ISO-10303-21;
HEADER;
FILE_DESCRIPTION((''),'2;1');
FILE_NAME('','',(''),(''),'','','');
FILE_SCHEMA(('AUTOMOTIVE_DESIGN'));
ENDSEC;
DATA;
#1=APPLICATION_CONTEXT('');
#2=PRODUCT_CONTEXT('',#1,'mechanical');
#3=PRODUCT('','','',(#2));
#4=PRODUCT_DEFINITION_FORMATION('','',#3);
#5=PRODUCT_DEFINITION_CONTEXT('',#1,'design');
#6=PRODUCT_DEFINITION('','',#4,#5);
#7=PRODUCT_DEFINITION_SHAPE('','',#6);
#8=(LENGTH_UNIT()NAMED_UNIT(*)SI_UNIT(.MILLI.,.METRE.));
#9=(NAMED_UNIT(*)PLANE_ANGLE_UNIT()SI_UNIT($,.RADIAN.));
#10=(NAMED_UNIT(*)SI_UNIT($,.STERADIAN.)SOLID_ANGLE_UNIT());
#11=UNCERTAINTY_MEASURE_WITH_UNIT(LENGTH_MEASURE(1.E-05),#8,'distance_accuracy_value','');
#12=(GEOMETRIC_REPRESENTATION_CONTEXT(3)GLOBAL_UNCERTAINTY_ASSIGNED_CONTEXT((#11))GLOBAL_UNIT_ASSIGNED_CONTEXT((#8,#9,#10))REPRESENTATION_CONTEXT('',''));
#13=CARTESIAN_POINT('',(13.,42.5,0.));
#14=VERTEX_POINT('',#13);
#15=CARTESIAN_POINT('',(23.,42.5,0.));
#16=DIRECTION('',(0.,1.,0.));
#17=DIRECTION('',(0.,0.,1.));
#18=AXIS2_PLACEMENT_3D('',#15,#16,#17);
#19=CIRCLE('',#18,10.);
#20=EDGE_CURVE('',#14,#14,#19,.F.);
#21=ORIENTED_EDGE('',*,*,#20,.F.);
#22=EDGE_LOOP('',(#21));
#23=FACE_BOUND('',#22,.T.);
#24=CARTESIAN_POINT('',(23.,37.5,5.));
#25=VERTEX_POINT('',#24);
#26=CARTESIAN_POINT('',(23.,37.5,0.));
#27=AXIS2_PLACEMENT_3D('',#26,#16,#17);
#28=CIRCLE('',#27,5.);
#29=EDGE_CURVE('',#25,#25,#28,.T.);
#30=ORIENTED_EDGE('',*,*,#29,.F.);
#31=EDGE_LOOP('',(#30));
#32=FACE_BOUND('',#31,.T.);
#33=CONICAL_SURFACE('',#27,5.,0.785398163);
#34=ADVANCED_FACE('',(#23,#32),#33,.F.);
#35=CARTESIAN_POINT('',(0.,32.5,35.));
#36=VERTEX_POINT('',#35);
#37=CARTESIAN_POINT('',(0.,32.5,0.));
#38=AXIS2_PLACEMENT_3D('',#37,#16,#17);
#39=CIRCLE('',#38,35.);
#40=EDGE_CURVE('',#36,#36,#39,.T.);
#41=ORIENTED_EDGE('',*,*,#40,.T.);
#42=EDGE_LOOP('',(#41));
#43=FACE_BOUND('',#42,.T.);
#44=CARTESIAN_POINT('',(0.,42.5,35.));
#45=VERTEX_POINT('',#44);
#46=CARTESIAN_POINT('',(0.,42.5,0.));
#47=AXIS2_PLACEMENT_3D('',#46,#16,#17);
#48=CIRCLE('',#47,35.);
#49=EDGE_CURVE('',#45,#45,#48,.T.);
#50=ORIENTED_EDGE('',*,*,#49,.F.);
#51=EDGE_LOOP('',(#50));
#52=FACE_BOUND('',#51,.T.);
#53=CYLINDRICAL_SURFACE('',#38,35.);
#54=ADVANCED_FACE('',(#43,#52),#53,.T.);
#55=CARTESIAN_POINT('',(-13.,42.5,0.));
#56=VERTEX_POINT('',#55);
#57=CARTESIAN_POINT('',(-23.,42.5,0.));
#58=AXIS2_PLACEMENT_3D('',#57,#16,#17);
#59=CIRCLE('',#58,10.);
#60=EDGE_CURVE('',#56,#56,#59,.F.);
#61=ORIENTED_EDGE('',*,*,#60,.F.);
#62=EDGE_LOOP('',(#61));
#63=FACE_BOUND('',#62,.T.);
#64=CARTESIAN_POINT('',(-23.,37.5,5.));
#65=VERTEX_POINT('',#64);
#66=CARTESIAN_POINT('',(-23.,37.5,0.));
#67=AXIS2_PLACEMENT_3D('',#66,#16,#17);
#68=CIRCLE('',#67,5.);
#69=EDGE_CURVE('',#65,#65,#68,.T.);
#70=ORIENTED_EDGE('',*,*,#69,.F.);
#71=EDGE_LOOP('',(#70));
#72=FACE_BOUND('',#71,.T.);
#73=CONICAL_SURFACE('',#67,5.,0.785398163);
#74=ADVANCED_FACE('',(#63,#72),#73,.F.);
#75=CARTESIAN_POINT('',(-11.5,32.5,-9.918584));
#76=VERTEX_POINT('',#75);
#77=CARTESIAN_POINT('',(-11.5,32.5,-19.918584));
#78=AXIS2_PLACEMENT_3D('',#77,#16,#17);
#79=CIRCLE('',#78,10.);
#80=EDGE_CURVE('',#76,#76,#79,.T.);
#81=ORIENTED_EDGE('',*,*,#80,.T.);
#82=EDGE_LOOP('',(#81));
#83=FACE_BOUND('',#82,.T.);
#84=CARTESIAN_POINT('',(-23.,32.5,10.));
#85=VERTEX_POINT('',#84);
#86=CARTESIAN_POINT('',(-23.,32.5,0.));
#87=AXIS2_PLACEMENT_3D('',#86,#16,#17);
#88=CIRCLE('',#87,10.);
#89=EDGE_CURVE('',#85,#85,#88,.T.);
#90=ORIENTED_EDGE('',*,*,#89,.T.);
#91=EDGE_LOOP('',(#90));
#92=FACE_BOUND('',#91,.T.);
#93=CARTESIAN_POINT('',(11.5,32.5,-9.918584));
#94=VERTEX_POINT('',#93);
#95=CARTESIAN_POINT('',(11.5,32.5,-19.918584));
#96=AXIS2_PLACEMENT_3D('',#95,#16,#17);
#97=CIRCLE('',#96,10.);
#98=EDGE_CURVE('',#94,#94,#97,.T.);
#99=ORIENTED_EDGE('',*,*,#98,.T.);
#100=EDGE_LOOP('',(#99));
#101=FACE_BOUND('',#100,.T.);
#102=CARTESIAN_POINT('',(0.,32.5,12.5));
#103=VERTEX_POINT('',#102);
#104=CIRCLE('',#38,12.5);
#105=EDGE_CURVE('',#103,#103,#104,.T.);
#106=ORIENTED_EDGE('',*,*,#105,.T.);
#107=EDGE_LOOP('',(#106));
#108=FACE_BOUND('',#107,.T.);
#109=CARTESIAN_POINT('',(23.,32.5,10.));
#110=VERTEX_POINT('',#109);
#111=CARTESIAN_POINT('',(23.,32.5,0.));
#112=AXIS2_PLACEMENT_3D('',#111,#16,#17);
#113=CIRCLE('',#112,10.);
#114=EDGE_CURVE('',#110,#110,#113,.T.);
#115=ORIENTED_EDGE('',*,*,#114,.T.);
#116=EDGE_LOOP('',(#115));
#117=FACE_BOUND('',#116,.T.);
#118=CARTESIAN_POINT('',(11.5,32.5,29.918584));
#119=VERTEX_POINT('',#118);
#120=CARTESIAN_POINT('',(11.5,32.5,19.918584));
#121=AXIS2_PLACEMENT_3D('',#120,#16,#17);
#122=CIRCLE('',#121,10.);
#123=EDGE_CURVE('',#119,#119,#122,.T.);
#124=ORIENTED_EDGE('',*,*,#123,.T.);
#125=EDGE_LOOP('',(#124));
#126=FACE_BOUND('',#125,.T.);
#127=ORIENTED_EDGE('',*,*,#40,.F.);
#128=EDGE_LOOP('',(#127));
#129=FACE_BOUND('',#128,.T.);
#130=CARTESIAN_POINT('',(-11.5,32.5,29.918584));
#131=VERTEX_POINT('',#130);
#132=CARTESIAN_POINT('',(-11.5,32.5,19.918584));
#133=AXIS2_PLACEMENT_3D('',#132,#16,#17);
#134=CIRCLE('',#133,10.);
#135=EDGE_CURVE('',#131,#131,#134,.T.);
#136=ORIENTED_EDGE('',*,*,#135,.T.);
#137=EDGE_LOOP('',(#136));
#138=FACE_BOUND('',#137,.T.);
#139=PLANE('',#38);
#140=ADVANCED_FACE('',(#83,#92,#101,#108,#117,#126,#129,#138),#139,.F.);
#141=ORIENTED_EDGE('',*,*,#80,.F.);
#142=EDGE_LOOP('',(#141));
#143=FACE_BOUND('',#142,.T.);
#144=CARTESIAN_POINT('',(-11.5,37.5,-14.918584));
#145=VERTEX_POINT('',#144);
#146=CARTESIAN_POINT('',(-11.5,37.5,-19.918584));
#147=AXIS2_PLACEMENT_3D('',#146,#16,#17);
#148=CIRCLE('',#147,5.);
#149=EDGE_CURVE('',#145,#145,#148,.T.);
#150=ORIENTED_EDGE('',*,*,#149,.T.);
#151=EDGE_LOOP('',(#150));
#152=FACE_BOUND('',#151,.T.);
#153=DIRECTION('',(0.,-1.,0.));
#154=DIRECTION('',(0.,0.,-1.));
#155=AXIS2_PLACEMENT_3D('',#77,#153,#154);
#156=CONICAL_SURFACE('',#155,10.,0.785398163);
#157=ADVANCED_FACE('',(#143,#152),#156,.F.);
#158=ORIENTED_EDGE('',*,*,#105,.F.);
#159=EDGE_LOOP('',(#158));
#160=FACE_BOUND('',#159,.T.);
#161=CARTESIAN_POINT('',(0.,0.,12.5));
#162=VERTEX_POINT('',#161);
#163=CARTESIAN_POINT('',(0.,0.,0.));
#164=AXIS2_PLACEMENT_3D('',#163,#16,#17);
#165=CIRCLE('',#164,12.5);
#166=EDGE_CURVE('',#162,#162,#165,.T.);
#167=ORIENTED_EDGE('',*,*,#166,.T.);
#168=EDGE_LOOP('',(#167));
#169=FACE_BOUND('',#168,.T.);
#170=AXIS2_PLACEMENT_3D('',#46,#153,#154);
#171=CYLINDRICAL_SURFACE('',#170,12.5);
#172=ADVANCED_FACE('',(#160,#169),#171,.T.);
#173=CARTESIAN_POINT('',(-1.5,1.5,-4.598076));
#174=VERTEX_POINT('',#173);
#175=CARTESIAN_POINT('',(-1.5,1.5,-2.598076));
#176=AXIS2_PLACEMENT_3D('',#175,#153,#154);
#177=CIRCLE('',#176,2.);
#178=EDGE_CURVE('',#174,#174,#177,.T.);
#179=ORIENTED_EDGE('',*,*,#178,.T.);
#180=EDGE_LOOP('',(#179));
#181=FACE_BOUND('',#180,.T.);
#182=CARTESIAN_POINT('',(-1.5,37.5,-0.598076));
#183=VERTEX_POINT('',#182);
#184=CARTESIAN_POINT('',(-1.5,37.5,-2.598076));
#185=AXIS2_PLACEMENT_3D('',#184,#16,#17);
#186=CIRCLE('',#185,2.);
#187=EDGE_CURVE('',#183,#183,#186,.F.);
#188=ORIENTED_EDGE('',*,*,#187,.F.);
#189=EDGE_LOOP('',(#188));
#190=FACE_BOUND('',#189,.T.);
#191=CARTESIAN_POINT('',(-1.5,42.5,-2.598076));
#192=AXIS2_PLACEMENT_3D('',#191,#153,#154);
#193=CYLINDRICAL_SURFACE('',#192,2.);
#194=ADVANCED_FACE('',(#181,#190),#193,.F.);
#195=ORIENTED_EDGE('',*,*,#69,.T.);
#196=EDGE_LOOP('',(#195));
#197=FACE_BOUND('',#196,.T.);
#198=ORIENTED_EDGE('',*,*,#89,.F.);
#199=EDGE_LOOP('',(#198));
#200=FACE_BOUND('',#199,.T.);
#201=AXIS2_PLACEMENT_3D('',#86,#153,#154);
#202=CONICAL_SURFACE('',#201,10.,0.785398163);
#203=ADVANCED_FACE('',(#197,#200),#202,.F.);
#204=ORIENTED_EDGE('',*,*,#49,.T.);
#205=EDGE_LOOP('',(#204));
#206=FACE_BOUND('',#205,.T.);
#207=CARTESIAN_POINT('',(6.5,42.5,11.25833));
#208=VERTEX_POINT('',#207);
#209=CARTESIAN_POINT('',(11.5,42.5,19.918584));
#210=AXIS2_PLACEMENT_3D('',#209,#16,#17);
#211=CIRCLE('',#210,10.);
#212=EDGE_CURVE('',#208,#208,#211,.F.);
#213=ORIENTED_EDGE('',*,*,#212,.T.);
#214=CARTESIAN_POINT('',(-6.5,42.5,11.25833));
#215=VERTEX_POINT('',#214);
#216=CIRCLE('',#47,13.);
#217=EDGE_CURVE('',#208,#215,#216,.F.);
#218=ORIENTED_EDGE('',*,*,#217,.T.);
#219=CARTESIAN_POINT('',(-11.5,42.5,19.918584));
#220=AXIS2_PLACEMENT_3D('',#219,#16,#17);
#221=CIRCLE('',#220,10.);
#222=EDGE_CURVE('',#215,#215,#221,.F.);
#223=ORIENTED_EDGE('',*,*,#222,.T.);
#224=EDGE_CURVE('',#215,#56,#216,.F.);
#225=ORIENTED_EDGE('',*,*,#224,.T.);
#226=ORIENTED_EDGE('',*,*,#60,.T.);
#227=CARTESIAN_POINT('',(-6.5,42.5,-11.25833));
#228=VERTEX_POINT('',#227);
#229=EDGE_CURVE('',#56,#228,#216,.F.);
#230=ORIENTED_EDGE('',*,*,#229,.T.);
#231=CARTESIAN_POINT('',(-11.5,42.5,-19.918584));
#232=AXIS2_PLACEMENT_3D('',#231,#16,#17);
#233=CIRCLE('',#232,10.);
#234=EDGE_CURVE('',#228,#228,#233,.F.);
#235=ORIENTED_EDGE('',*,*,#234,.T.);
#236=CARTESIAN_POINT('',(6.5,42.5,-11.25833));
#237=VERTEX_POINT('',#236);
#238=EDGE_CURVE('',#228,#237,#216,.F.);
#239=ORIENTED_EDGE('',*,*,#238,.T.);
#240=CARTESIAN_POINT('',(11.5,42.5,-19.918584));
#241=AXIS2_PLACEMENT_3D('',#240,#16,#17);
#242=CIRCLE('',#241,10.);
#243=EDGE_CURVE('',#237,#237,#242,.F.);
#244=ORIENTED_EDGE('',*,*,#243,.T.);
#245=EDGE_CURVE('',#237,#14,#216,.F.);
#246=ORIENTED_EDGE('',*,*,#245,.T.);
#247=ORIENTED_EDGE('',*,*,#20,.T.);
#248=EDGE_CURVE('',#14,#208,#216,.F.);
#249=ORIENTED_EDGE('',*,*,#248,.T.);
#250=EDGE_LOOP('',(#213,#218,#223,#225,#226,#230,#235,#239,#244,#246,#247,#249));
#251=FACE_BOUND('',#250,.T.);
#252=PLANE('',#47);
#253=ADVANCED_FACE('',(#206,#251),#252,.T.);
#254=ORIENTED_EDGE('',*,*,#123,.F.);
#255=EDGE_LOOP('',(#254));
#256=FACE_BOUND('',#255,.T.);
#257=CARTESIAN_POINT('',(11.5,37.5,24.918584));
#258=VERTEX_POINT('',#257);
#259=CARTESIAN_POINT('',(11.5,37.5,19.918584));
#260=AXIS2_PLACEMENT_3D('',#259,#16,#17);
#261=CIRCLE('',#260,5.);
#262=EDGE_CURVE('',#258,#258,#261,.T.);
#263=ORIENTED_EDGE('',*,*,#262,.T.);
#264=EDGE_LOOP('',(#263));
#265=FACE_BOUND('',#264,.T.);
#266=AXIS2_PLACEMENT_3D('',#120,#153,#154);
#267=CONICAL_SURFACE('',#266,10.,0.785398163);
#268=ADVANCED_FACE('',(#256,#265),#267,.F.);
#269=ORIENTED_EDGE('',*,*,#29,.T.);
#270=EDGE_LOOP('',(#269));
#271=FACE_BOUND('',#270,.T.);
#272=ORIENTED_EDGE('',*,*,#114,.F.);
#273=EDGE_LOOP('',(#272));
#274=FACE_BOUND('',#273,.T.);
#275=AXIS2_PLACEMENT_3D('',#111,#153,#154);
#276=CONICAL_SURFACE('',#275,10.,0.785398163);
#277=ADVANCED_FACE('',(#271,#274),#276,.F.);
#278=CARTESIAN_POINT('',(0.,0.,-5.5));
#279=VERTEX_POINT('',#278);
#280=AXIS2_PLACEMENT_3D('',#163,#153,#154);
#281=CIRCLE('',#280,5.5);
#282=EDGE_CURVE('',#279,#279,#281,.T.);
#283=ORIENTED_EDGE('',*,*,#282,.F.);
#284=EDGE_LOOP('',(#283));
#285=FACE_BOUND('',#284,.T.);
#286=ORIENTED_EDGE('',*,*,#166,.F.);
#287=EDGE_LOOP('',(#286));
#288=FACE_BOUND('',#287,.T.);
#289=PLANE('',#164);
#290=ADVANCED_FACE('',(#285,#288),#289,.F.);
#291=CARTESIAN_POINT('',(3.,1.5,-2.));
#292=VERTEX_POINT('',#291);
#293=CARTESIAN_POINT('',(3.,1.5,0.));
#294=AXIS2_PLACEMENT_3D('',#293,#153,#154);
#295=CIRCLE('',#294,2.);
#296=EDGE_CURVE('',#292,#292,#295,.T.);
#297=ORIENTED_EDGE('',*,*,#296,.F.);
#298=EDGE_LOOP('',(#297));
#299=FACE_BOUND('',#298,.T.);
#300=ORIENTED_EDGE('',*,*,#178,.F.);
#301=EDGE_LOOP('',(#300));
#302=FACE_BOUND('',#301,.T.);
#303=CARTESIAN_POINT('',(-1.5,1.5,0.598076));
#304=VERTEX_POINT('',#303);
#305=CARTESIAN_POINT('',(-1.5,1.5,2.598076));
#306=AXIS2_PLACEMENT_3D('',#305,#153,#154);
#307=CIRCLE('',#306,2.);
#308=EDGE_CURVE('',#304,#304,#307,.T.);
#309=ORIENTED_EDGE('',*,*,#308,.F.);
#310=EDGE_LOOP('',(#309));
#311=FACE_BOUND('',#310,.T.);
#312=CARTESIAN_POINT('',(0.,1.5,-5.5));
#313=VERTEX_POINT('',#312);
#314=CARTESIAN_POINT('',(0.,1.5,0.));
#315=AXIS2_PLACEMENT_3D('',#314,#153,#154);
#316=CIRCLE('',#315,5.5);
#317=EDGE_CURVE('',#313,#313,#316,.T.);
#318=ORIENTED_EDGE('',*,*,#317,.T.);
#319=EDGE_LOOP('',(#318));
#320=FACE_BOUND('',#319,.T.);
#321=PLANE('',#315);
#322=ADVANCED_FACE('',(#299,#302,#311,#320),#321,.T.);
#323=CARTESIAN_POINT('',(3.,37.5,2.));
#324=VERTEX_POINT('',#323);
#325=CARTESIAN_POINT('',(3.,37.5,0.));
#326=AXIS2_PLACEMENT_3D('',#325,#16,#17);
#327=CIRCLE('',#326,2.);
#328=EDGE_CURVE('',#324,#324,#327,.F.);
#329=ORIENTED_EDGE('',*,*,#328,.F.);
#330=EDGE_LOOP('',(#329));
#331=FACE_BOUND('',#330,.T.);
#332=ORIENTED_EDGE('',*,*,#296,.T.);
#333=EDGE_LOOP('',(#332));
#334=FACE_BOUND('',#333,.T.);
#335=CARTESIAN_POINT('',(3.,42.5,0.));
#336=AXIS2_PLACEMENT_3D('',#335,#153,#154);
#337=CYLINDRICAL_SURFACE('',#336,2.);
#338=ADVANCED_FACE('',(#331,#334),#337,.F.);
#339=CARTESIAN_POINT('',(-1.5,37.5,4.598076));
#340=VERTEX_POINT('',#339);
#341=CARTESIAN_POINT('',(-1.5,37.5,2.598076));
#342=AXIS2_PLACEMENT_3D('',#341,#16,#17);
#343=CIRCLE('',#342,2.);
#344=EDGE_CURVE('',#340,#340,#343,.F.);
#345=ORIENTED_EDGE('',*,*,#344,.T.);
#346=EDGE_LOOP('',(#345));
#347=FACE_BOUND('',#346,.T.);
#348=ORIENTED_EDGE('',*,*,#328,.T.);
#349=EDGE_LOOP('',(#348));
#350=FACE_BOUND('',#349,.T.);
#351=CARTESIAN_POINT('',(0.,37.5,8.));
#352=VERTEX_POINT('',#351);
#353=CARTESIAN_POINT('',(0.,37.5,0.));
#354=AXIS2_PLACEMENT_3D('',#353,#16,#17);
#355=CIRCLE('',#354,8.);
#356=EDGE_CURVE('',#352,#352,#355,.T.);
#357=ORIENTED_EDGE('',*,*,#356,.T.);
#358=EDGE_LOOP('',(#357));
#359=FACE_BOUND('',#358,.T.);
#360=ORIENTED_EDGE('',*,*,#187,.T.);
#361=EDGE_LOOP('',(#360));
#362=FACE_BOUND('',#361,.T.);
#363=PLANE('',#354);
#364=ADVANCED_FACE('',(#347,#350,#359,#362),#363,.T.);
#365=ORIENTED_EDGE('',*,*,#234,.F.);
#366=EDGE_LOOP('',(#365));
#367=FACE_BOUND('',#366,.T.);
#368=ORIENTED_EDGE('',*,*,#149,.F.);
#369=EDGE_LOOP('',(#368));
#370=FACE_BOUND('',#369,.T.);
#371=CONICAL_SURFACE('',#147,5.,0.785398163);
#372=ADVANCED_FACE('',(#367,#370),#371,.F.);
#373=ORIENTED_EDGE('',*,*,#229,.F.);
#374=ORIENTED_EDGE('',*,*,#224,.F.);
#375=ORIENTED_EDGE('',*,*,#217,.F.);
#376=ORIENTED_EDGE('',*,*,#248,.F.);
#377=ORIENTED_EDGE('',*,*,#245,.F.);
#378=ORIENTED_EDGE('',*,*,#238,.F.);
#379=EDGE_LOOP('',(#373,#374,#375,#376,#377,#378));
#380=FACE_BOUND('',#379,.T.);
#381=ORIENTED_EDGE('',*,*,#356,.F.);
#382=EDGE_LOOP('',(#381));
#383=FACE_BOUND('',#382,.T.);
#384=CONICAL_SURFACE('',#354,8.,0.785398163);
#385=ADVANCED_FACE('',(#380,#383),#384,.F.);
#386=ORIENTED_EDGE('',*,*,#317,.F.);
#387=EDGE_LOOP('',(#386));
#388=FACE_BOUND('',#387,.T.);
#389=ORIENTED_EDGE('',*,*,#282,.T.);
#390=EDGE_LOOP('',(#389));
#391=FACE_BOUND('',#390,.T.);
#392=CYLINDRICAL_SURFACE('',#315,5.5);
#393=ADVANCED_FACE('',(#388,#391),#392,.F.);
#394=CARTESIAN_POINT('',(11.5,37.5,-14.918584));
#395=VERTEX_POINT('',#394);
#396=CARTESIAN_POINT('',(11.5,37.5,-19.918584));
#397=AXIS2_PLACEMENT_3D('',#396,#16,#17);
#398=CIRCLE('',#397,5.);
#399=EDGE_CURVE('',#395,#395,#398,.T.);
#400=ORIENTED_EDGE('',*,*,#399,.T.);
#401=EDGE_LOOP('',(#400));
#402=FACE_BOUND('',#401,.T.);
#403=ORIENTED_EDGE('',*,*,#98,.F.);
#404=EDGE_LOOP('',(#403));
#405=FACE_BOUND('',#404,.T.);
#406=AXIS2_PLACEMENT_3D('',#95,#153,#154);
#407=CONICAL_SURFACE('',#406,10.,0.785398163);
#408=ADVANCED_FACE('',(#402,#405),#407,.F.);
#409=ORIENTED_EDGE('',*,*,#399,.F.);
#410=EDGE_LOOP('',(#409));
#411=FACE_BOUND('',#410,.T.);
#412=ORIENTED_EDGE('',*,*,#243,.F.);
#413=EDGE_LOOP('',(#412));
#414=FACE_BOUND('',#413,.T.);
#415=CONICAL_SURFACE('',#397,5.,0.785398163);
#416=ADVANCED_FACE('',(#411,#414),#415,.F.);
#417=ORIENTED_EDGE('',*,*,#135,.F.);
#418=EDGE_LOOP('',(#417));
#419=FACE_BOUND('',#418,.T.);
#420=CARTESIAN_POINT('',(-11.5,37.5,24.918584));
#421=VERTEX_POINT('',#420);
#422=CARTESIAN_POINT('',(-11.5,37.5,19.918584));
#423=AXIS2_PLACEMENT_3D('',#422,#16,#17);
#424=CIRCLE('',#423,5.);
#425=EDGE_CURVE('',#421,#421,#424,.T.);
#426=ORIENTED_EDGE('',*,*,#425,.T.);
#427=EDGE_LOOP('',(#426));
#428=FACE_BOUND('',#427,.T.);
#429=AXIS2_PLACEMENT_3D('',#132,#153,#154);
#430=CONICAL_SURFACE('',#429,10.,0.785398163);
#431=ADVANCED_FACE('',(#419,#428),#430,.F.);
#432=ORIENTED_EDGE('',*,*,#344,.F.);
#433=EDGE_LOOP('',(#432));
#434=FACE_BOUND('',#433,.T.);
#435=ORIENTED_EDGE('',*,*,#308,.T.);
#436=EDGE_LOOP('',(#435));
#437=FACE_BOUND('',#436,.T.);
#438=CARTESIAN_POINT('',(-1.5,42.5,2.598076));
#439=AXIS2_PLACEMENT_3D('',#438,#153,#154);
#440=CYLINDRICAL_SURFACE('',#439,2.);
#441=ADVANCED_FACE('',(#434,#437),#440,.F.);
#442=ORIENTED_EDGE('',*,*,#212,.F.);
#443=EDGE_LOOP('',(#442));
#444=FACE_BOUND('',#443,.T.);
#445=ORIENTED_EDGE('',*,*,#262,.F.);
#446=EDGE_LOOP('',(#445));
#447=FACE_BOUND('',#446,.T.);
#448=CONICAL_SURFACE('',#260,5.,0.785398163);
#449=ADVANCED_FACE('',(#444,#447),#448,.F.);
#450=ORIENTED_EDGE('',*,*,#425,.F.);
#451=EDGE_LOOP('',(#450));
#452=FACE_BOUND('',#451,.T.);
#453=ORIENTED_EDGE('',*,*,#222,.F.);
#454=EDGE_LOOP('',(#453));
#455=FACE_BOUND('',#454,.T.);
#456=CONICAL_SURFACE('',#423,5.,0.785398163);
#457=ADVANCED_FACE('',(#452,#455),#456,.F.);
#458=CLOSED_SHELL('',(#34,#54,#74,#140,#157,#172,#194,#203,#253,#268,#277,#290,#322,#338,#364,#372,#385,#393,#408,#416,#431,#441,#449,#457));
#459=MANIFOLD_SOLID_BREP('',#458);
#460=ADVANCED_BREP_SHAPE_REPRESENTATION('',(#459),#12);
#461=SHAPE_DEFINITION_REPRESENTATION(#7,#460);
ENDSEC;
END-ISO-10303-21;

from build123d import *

# Parameters (mm, degrees)
SKETCH1_R           = 12.5
SKETCH1_R_2         = 2
BOSS_EXTRUDE1_DEPTH = 42.5
SKETCH2_R           = 5.5
CUT_EXTRUDE1_DEPTH  = 1.5
BOSS_EXTRUDE3_START = -10
SKETCH3_R           = 35
SKETCH3_R_2         = 12.5
BOSS_EXTRUDE3_DEPTH = 10
SKETCH4_R           = 5
CUT_EXTRUDE5_DEPTH  = 10
CHAMFER7_SIZE       = 5
CUT_EXTRUDE6_START  = -5
SKETCH7_R           = 8
SKETCH7_R_2         = 5.5
SKETCH7_R_3         = 2
CUT_EXTRUDE6_DEPTH  = 5
CHAMFER8_SIZE       = 5


with BuildPart() as part:
    # Sketch1 → Boss-Extrude1 (new body)
    with BuildSketch(Plane(origin=(0, 0, 0), x_dir=(1, 0, 0), z_dir=(0, 1, 0))):
        with Locations(Location((0, 0, 0), (0, 0, 270))):
            Circle(SKETCH1_R)
        with Locations(Location((3, 0, 0), (0, 0, 270))):
            Circle(SKETCH1_R_2, mode=Mode.SUBTRACT)
        with Locations(Location((-1.5, -2.598076211, 0), (0, 0, 270))):
            Circle(SKETCH1_R_2, mode=Mode.SUBTRACT)
        with Locations(Location((-1.5, 2.598076211, 0), (0, 0, 270))):
            Circle(SKETCH1_R_2, mode=Mode.SUBTRACT)
    extrude(amount=BOSS_EXTRUDE1_DEPTH)

    # Sketch2 → Cut-Extrude1 (cut)
    with BuildSketch(Plane.XZ):
        with Locations(Location((0, 0, 0), (0, 0, 270))):
            Circle(SKETCH2_R)
    extrude(amount=-CUT_EXTRUDE1_DEPTH, mode=Mode.SUBTRACT)

    # Sketch3 → Boss-Extrude3 (add)
    with BuildSketch(Plane(origin=(0, 42.5, 0), x_dir=(1, 0, 0), z_dir=(0, 1, 0)).offset(BOSS_EXTRUDE3_START)):
        with Locations(Location((0, 0, 0), (0, 0, 270))):
            Circle(SKETCH3_R)
        with Locations(Location((0, 0, 0), (0, 0, 270))):
            Circle(SKETCH3_R_2, mode=Mode.SUBTRACT)
    extrude(amount=BOSS_EXTRUDE3_DEPTH)

    # Sketch4 → Cut-Extrude5 (cut)
    with BuildSketch(Plane(origin=(0, 42.5, 0), x_dir=(1, 0, 0), z_dir=(0, 1, 0))):
        with Locations(Location((-23, 0, 0), (0, 0, 270))):
            Circle(SKETCH4_R)
        with Locations(Location((-11.5, 19.918584287, 0), (0, 0, 270))):
            Circle(SKETCH4_R)
        with Locations(Location((11.5, 19.918584287, 0), (0, 0, 270))):
            Circle(SKETCH4_R)
        with Locations(Location((23, 0, 0), (0, 0, 270))):
            Circle(SKETCH4_R)
        with Locations(Location((11.5, -19.918584287, 0), (0, 0, 270))):
            Circle(SKETCH4_R)
        with Locations(Location((-11.5, -19.918584287, 0), (0, 0, 270))):
            Circle(SKETCH4_R)
    extrude(amount=-CUT_EXTRUDE5_DEPTH, mode=Mode.SUBTRACT)

    # Chamfer7
    chamfer7_edges = [part.edges().sort_by_distance(p)[0] for p in [
        (-23, 32.5, -5),
        (-23, 42.5, -5),
        (-11.5, 32.5, 14.918584287),
        (-11.5, 42.5, 14.918584287),
        (11.5, 32.5, 14.918584287),
        (11.5, 42.5, 14.918584287),
        (23, 32.5, -5),
        (23, 42.5, -5),
        (11.5, 32.5, -24.918584287),
        (11.5, 42.5, -24.918584287),
        (-11.5, 32.5, -24.918584287),
        (-11.5, 42.5, -24.918584287),
    ]]
    chamfer(chamfer7_edges, length=CHAMFER7_SIZE - 0.0001)  # a hair under: the kernel refuses the full size

    # Sketch7 → Cut-Extrude6 (cut)
    # profile 1 of 2: a face of its own
    with BuildSketch(Plane(origin=(0, 42.5, 0), x_dir=(1, 0, 0), z_dir=(0, 1, 0)).offset(CUT_EXTRUDE6_START)):
        with Locations(Location((0, 0, 0), (0, 0, 270))):
            Circle(SKETCH7_R)
        with Locations(Location((0, 0, 0), (0, 0, 90))):
            Circle(SKETCH7_R_2, mode=Mode.SUBTRACT)
    # profile 2 of 2: a face of its own
    with BuildSketch(Plane(origin=(0, 42.5, 0), x_dir=(1, 0, 0), z_dir=(0, 1, 0)).offset(CUT_EXTRUDE6_START)):
        with Locations(Location((0, 0, 0), (0, 0, 90))):
            Circle(SKETCH7_R_2)
        with Locations(Location((-1.5, 2.598076211, 0), (0, 0, 90))):
            Circle(SKETCH7_R_3, mode=Mode.SUBTRACT)
        with Locations(Location((-1.5, -2.598076211, 0), (0, 0, 90))):
            Circle(SKETCH7_R_3, mode=Mode.SUBTRACT)
        with Locations(Location((3, 0, 0), (0, 0, 90))):
            Circle(SKETCH7_R_3, mode=Mode.SUBTRACT)
    extrude(amount=CUT_EXTRUDE6_DEPTH, mode=Mode.SUBTRACT)

    # Chamfer8
    chamfer8_edges = [part.edges().sort_by_distance(p)[0] for p in [
        (0, 42.5, -8),
    ]]
    chamfer(chamfer8_edges, length=CHAMFER8_SIZE - 0.0001)  # a hair under: the kernel refuses the full size


solid = part.part
